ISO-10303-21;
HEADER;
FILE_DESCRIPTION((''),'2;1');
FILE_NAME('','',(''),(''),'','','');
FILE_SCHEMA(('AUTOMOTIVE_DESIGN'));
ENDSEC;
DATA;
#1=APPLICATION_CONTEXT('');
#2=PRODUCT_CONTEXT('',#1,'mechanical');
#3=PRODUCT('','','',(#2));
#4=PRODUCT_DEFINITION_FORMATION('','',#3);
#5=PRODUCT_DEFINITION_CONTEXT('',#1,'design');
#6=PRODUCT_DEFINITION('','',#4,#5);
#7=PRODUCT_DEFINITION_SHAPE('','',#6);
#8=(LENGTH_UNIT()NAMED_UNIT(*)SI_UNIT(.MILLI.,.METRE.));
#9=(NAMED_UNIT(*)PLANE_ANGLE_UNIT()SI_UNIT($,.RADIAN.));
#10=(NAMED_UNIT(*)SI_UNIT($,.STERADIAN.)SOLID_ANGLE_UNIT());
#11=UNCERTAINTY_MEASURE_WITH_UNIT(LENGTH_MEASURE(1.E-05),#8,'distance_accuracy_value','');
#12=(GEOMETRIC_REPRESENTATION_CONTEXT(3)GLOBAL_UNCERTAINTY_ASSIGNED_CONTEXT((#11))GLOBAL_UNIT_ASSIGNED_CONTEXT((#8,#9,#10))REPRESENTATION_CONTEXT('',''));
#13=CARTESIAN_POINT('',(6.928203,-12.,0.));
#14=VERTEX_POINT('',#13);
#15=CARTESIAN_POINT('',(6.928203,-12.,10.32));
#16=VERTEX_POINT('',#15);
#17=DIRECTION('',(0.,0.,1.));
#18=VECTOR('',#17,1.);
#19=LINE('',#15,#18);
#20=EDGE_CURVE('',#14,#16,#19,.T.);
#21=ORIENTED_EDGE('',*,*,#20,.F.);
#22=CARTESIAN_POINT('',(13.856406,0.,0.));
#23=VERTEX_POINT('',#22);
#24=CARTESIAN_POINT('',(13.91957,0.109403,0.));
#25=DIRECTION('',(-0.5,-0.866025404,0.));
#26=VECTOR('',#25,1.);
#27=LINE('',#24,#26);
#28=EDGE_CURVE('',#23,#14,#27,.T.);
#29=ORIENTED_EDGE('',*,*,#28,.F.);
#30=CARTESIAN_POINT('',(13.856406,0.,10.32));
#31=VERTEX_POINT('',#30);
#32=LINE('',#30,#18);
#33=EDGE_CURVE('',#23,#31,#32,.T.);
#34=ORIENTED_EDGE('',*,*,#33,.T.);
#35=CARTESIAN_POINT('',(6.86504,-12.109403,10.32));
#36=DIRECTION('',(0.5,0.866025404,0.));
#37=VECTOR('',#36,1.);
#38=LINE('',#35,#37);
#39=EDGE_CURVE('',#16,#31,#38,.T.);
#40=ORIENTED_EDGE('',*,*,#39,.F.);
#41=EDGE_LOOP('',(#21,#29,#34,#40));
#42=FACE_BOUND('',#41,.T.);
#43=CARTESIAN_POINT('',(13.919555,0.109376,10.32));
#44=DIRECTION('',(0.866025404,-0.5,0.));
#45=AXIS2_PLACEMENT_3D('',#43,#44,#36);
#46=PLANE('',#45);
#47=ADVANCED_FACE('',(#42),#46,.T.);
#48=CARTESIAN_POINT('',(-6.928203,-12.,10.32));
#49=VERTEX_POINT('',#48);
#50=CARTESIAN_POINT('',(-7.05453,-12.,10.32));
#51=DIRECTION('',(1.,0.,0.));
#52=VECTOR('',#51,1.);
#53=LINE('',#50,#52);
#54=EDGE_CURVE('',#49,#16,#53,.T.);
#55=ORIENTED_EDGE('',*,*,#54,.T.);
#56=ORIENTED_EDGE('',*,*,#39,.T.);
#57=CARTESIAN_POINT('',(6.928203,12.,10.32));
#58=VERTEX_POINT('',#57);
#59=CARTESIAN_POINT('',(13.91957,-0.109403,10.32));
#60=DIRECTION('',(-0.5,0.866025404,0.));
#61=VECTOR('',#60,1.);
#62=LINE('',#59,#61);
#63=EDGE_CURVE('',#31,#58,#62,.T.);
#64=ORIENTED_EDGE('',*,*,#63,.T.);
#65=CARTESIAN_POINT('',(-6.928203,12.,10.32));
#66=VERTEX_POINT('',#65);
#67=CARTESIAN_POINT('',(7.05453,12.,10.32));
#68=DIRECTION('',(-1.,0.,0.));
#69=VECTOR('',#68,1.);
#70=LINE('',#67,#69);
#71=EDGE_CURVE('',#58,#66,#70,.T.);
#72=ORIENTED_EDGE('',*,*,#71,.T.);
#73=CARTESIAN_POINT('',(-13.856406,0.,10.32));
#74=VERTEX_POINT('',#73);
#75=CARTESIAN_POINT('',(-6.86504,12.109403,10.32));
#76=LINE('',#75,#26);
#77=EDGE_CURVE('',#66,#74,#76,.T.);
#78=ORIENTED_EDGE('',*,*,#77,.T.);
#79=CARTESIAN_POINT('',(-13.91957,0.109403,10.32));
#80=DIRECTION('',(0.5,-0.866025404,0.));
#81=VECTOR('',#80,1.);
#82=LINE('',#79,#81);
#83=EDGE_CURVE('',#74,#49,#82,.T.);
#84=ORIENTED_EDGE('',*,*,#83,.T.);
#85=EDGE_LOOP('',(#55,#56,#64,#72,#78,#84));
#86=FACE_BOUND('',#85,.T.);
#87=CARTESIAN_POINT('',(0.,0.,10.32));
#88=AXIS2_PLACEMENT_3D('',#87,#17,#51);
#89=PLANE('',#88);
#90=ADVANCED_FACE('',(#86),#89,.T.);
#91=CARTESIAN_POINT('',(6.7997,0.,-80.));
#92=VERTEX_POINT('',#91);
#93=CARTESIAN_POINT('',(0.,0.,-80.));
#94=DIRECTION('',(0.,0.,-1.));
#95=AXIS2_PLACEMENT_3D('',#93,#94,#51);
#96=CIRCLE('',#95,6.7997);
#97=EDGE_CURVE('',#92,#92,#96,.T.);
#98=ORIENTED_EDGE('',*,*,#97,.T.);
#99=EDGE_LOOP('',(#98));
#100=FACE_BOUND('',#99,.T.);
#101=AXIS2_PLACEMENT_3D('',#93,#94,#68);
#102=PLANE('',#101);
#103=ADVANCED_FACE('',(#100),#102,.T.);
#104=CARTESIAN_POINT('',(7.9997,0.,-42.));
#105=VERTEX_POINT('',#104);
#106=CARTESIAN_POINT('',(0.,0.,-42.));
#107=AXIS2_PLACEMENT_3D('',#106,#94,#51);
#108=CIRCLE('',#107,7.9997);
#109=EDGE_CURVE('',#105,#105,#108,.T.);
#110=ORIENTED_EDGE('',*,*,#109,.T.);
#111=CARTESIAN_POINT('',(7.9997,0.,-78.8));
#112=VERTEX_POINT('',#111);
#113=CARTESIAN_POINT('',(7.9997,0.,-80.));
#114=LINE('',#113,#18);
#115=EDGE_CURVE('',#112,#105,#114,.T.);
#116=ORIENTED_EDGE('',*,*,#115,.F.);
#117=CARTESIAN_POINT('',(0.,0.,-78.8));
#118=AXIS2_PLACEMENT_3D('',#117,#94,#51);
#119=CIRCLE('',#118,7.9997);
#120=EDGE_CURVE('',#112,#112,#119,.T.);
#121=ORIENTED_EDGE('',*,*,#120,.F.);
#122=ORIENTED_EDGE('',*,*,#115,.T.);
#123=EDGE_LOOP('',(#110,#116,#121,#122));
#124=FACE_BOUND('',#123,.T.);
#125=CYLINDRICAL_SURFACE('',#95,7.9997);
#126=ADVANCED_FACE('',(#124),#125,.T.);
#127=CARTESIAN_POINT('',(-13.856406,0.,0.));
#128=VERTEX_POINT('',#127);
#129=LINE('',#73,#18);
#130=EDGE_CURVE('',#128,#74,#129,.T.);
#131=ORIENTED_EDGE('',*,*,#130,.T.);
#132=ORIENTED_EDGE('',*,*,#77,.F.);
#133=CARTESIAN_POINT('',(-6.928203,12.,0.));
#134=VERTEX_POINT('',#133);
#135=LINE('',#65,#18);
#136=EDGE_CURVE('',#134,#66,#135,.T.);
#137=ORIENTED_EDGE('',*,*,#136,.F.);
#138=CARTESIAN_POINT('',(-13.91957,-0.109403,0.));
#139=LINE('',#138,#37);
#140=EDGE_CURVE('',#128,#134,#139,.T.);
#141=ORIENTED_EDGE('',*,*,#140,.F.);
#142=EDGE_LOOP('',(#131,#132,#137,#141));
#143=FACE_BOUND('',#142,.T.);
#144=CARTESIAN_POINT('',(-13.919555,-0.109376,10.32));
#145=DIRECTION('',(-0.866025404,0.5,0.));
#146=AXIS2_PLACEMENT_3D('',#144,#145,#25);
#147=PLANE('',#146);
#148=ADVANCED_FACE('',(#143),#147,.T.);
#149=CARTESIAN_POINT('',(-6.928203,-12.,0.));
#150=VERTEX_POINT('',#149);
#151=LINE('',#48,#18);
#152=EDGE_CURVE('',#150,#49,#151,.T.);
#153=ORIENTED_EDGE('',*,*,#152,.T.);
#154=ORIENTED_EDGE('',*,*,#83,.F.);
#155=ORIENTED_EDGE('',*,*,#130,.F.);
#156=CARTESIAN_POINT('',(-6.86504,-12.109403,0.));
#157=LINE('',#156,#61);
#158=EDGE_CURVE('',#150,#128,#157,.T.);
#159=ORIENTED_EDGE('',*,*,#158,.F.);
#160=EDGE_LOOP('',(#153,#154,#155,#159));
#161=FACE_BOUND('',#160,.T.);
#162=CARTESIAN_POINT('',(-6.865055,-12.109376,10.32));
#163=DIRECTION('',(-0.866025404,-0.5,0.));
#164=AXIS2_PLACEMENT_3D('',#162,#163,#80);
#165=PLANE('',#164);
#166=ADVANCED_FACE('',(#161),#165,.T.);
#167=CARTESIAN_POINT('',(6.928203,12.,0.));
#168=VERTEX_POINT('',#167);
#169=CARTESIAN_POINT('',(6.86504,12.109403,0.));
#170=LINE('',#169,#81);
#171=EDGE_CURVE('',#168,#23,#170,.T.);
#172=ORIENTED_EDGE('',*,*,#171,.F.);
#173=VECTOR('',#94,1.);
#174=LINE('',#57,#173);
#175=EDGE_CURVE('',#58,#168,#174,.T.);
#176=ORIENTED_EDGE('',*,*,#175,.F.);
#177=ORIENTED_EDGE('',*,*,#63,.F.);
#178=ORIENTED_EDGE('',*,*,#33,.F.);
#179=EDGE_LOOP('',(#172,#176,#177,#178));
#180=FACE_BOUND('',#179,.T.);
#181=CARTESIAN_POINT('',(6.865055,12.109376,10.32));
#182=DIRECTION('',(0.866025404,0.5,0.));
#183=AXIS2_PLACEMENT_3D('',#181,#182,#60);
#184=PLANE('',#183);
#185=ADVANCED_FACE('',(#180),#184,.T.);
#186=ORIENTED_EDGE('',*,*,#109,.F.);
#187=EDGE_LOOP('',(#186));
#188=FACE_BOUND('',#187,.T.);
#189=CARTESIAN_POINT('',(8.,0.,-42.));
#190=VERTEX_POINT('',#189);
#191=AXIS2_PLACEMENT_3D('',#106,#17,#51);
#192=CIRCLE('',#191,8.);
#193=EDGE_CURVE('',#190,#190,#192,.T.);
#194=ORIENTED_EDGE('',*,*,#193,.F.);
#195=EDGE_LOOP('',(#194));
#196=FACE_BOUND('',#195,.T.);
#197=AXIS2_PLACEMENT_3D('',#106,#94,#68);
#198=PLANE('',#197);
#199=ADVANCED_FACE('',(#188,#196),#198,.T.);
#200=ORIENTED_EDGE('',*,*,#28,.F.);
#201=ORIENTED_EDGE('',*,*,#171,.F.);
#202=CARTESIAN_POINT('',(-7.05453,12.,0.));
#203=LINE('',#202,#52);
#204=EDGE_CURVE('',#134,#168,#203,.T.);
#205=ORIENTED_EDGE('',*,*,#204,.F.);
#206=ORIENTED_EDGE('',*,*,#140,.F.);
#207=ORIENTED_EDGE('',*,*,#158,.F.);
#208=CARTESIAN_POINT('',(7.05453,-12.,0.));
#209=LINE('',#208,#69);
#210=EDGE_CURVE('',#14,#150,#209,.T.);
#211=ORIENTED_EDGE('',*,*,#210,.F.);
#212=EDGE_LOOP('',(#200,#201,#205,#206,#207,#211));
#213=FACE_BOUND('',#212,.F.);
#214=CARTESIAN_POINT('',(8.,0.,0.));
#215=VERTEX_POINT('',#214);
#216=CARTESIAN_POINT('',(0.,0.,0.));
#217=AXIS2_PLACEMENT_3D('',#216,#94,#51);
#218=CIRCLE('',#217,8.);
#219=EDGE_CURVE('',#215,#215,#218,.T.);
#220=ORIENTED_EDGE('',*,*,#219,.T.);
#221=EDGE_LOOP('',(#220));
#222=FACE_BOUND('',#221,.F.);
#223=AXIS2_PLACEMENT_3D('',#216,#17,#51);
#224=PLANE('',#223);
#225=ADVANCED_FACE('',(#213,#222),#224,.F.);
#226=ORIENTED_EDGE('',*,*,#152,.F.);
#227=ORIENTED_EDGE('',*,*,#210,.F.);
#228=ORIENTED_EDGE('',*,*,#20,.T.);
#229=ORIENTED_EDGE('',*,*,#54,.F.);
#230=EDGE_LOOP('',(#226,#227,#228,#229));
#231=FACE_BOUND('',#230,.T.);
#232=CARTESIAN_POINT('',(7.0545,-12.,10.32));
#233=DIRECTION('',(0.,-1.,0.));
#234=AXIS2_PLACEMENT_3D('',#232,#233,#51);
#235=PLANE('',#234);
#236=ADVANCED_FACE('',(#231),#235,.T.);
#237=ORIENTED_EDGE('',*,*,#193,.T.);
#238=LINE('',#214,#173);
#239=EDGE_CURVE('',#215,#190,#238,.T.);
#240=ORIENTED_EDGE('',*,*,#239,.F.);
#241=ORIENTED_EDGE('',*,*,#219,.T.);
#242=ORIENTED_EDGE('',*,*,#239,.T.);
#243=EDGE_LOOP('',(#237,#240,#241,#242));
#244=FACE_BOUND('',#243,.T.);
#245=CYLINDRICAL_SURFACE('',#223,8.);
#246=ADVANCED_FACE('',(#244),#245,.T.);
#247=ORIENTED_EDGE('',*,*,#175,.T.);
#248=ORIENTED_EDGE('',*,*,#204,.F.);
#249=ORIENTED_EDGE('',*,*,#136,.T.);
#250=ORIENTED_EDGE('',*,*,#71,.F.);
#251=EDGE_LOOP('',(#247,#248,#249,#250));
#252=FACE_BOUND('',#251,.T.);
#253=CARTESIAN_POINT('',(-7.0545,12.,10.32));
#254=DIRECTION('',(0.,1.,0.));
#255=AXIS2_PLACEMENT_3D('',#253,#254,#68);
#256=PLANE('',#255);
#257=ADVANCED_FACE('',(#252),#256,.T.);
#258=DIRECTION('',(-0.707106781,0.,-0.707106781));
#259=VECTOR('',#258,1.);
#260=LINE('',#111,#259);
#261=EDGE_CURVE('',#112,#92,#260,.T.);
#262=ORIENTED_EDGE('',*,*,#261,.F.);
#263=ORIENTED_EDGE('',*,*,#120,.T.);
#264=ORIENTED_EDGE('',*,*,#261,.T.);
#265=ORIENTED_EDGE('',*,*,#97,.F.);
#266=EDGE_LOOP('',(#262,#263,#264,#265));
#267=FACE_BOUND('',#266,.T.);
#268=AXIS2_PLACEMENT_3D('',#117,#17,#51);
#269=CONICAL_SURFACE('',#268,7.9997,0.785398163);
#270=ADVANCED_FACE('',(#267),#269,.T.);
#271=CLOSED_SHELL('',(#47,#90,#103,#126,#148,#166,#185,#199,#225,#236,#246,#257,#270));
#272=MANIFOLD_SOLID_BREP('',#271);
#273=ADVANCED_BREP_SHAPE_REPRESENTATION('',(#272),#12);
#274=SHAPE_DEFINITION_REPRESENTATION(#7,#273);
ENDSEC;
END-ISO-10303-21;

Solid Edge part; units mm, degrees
sketch "Sketch1" plane through (0, 0, 0) normal (0, 0, 1) x (1, 0, 0)
  circle A0 centre (0, 0) radius 13.92
  dimension "D1" = 27.84
extrude "Protrusion1" add sketch "Sketch1" along normal blind 10.32
sketch "Sketch2" plane through (0, 0, 0) normal (0, 0, -1) x (1, 0, 0)
  circle A0 centre (0, 0) radius 8
extrude "Protrusion2" add sketch "Sketch2" along normal blind 80
sketch "Sketch3" plane through (0, 0, -80) normal (0, 0, -1) x (1, 0, 0)
  circle A0 centre (0, 0) radius 7.9997
extrude "Cutout1" cut sketch "Sketch3" against normal blind 38 flip side to cut
chamfer "Chamfer_1" distance 1.2 angle 45 1 edges at (-7.9997, 0, -80)
sketch "Sketch4" plane through (0, 0, 10.32) normal (0, 0, 1) x (1, 0, 0)
  line L0 (-7.0545, 12) -> (7.0545, 12)
  dimension "D1" = 24
extrude "Cutout2" cut sketch "Sketch4" against normal up to next material side at (0, 12.05, 10.32)
pattern_circular "Pattern1" count 6 over 360 about axis through (0, 0, 10.32) along (0, 0, 1) of "Cutout2"
properties part number "24104720"
